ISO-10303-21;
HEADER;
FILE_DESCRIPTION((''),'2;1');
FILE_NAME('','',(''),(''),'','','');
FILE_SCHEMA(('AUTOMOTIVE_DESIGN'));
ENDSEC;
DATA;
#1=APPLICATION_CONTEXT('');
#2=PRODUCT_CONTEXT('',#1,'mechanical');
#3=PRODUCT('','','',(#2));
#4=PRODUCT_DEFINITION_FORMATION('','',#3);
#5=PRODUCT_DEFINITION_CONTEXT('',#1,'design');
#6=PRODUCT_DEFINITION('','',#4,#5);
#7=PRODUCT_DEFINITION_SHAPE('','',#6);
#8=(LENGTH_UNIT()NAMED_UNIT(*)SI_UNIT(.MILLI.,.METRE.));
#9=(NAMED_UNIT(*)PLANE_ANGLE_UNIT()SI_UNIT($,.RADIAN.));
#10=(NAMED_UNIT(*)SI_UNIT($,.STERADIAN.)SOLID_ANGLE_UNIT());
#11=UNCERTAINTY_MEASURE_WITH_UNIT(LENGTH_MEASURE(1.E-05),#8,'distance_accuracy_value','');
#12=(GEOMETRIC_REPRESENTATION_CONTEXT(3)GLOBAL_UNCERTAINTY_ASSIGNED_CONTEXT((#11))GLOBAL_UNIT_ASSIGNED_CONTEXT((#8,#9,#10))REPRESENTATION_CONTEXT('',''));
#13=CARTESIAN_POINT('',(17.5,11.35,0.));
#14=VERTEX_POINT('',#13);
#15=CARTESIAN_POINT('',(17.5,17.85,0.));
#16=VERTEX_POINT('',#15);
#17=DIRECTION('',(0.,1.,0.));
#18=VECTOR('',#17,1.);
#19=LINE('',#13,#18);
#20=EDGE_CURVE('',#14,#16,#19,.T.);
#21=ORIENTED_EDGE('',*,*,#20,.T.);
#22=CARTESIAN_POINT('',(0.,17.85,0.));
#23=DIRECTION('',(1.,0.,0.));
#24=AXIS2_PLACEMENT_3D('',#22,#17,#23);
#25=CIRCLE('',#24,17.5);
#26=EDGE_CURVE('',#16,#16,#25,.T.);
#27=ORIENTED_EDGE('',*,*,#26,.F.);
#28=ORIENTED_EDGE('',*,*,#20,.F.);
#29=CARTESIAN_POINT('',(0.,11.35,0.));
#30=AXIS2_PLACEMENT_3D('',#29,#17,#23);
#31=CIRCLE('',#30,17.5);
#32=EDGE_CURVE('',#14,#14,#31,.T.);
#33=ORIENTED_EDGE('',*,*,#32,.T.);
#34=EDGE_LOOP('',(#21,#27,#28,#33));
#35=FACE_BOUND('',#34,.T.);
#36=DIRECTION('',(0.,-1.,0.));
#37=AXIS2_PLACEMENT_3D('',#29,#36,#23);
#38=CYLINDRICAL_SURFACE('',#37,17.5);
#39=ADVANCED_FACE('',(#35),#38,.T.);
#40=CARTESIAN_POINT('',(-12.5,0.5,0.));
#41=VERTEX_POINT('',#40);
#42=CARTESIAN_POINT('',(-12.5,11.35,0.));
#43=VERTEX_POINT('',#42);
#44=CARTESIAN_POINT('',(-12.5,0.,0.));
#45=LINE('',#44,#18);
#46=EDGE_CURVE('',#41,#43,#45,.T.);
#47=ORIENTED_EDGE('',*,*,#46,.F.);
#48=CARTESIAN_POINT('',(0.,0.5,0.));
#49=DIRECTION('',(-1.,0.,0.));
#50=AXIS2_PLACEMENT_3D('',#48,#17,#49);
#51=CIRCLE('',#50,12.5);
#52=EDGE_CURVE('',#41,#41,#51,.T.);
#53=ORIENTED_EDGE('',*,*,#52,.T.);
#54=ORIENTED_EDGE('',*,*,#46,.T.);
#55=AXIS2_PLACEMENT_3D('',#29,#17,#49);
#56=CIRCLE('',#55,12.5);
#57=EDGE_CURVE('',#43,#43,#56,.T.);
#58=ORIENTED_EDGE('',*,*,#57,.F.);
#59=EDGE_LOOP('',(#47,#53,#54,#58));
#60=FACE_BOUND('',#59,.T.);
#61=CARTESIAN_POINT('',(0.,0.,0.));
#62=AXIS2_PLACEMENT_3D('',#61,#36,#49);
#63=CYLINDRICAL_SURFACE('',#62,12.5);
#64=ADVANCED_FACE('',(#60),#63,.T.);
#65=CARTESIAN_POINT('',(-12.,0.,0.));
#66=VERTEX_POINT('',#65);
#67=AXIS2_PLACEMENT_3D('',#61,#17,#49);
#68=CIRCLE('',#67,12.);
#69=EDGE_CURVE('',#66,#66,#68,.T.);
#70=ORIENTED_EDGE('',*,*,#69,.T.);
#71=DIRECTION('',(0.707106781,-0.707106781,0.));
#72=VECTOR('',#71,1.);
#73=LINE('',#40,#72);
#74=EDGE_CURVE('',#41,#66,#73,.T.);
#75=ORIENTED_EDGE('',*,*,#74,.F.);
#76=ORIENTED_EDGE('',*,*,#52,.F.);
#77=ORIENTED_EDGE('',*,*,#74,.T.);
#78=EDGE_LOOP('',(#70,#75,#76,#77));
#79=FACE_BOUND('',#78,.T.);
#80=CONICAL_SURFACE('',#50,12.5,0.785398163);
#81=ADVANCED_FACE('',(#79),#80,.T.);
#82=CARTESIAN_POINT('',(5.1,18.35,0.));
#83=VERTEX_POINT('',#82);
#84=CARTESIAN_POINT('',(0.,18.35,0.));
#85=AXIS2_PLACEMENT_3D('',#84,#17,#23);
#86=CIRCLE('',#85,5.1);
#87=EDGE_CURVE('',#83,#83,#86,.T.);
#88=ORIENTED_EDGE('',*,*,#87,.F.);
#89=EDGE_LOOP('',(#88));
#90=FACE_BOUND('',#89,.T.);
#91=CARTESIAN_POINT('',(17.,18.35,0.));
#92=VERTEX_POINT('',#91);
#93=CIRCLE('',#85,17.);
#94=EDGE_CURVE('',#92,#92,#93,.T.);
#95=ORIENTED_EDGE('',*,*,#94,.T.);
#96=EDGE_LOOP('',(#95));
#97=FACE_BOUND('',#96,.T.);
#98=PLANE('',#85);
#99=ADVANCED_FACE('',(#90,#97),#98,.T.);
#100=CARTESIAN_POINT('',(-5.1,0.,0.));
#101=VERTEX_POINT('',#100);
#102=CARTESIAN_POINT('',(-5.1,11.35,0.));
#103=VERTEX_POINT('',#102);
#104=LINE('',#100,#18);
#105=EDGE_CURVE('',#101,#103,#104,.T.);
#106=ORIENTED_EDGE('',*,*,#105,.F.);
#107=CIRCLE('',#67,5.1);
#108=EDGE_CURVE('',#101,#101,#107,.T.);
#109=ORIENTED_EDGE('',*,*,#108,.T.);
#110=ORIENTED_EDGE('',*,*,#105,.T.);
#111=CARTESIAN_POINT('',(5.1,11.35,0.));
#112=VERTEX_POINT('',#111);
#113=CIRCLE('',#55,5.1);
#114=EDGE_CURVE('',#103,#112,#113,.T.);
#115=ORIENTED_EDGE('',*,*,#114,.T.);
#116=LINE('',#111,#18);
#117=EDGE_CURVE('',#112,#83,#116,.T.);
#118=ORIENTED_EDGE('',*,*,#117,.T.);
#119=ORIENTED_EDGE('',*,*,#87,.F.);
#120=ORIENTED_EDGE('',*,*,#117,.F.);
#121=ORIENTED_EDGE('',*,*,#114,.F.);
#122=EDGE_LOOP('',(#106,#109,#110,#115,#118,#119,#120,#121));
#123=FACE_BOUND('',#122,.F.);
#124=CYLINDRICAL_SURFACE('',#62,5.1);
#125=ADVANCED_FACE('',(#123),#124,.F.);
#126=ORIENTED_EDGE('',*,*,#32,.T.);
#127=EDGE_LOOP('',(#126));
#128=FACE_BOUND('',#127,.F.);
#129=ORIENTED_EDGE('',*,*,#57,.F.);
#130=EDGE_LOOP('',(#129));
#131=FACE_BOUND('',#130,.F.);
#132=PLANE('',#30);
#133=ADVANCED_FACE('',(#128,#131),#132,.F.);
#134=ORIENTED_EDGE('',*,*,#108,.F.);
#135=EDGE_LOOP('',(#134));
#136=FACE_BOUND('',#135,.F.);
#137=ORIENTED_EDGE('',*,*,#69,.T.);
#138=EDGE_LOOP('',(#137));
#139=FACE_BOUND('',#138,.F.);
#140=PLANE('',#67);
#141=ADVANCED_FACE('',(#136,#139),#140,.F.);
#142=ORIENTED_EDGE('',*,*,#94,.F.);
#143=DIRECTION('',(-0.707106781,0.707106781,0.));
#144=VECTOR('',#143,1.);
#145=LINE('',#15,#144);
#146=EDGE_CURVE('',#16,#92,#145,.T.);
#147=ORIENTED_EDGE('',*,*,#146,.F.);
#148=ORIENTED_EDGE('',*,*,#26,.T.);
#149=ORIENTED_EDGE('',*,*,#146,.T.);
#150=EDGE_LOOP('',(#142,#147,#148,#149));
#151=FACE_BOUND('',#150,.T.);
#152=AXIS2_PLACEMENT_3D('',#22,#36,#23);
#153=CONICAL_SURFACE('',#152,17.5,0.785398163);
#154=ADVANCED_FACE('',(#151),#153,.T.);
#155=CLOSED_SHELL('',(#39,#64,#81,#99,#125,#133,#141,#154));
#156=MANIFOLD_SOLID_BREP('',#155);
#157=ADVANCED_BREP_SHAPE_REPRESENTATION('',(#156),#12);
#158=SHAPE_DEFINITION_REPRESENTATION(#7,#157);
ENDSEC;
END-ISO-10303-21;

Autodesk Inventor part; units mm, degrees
ref_plane "YZ Plane" through (0, 0, 0) normal (1, 0, 0) x (0, 1, 0)
ref_plane "XZ Plane" through (0, 0, 0) normal (0, 1, 0) x (-1, 0, 0)
ref_plane "XY Plane" through (0, 0, 0) normal (0, 0, 1) x (1, 0, 0)
sketch "Sketch1" plane through (0, 0, 0) normal (0, 1, 0) x (-1, 0, 0)
  circle A0 centre (0, 0) radius 5.1
  circle A1 centre (0, 0) radius 12.5
  dimension "d0" = 10.2
  dimension "d1" = 25
extrude "Extrusion1" add sketch "Sketch1" along normal blind 11.35
sketch "Sketch2" plane through (0, 11.35, 0) normal (0, 1, 0) x (1, 0, 0)
  circle A0 centre (0, 0) radius 12.5 projected
  circle A1 centre (0, 0) radius 5.1 projected
  circle A2 centre (0, 0) radius 17.5
  dimension "d4" = 35
extrude "Extrusion2" add sketch "Sketch2" along normal blind 7 contours A0 | A2
chamfer "Chamfer1" distance 0.5 angle 45 1 edges at (12.5, 0, 0)
chamfer "Chamfer2" distance 0.5 angle 45 1 edges at (-17.5, 18.35, 0)
properties part number "Ydre_bøsning_stempel_stang"
